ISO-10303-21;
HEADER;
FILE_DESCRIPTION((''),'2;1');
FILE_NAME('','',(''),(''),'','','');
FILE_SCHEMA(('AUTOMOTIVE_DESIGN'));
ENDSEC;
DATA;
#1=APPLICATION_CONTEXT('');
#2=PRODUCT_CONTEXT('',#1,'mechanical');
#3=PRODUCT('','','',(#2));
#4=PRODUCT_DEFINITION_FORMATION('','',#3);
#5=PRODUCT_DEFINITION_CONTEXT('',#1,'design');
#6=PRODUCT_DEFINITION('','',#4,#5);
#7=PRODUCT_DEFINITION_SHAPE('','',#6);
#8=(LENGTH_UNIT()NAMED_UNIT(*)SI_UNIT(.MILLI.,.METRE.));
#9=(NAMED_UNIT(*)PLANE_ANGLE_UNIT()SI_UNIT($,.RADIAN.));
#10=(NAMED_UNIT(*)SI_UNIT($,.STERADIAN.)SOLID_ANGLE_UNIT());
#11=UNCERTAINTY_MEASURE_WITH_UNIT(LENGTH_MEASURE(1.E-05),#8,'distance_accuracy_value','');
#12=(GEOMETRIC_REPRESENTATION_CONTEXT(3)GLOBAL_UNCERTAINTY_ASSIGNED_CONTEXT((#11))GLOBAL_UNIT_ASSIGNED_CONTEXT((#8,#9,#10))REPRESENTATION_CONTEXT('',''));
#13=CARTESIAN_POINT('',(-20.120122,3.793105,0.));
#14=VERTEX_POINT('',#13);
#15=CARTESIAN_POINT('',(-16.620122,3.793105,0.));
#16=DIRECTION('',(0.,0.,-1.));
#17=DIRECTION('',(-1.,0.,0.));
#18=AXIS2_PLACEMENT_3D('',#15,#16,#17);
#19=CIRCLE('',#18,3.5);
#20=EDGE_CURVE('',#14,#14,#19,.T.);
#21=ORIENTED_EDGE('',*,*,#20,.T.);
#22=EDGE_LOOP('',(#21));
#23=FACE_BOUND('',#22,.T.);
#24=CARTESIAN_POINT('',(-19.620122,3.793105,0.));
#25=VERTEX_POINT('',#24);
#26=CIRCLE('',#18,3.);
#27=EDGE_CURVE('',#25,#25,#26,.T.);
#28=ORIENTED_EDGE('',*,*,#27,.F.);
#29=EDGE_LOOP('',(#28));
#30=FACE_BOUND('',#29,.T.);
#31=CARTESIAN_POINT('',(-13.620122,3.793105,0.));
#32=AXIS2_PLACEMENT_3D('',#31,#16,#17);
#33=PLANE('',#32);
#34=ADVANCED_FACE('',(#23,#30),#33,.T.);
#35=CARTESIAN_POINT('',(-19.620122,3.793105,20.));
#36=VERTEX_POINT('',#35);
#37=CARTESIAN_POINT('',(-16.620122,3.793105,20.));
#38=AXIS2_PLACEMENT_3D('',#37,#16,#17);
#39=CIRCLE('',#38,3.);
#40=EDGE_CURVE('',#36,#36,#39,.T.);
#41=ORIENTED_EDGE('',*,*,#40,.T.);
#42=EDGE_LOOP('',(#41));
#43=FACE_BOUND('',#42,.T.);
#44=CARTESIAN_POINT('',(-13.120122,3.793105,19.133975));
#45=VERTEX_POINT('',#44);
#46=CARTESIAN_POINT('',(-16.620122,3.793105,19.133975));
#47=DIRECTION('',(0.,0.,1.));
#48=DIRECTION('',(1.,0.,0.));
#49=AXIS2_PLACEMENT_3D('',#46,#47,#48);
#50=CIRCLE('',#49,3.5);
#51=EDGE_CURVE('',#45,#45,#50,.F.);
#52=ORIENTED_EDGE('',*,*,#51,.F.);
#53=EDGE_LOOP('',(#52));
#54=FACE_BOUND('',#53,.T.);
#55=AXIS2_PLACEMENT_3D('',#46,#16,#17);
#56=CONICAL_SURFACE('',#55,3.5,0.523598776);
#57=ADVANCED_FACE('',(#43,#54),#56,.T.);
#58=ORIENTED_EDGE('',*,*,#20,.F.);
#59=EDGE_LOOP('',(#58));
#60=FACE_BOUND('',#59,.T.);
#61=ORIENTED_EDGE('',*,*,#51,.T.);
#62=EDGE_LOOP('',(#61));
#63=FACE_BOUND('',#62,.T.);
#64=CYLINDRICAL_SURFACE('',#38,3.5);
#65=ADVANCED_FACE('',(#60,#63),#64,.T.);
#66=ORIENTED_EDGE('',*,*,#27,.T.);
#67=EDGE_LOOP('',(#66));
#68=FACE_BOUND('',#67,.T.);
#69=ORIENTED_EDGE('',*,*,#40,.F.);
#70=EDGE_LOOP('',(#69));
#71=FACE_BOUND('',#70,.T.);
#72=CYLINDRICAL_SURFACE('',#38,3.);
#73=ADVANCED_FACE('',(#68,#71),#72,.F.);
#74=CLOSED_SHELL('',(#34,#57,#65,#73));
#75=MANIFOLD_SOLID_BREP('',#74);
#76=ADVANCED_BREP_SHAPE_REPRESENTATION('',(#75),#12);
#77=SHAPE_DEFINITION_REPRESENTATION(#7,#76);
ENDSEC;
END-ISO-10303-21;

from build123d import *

# Parameters (mm, degrees)
SKETCH1_W       = 0.5
SKETCH1_H       = 20
CHAMFER1_SIZE   = 0.5
CHAMFER1_SIZE_2 = 0.866025404


with BuildPart() as part:
    # Sketch1 → Revolve1 (revolve)
    with BuildSketch(Plane.XZ.offset(-3.793105254), mode=Mode.PRIVATE) as revolve1_sk:
        with Locations((-13.370121658, 10)):
            Rectangle(SKETCH1_W, SKETCH1_H)
    revolve(revolve1_sk.sketch.rotate(Axis((-16.620121658, 3.793105254, 20), (0, 0, -1)), 180), axis=Axis((-16.620121658, 3.793105254, 20), (0, 0, -1)))

    # Chamfer1
    # the kernel refuses this chamfer: 0.866025404, 0.5 mm, written as the material it takes off along each edge
    with BuildSketch(Plane(origin=(-16.620121658, 3.793105254, 20), x_dir=(-1, 0, 0), z_dir=(0, -1, 0))) as chamfer1_piece_1:
        Polygon((3.5 - CHAMFER1_SIZE, 0), (3.5, CHAMFER1_SIZE_2), (3.5, 0), align=None)
    revolve(axis=Axis((-16.620121658, 3.793105254, 20), (0, 0, -1)), mode=Mode.SUBTRACT)


solid = part.part
